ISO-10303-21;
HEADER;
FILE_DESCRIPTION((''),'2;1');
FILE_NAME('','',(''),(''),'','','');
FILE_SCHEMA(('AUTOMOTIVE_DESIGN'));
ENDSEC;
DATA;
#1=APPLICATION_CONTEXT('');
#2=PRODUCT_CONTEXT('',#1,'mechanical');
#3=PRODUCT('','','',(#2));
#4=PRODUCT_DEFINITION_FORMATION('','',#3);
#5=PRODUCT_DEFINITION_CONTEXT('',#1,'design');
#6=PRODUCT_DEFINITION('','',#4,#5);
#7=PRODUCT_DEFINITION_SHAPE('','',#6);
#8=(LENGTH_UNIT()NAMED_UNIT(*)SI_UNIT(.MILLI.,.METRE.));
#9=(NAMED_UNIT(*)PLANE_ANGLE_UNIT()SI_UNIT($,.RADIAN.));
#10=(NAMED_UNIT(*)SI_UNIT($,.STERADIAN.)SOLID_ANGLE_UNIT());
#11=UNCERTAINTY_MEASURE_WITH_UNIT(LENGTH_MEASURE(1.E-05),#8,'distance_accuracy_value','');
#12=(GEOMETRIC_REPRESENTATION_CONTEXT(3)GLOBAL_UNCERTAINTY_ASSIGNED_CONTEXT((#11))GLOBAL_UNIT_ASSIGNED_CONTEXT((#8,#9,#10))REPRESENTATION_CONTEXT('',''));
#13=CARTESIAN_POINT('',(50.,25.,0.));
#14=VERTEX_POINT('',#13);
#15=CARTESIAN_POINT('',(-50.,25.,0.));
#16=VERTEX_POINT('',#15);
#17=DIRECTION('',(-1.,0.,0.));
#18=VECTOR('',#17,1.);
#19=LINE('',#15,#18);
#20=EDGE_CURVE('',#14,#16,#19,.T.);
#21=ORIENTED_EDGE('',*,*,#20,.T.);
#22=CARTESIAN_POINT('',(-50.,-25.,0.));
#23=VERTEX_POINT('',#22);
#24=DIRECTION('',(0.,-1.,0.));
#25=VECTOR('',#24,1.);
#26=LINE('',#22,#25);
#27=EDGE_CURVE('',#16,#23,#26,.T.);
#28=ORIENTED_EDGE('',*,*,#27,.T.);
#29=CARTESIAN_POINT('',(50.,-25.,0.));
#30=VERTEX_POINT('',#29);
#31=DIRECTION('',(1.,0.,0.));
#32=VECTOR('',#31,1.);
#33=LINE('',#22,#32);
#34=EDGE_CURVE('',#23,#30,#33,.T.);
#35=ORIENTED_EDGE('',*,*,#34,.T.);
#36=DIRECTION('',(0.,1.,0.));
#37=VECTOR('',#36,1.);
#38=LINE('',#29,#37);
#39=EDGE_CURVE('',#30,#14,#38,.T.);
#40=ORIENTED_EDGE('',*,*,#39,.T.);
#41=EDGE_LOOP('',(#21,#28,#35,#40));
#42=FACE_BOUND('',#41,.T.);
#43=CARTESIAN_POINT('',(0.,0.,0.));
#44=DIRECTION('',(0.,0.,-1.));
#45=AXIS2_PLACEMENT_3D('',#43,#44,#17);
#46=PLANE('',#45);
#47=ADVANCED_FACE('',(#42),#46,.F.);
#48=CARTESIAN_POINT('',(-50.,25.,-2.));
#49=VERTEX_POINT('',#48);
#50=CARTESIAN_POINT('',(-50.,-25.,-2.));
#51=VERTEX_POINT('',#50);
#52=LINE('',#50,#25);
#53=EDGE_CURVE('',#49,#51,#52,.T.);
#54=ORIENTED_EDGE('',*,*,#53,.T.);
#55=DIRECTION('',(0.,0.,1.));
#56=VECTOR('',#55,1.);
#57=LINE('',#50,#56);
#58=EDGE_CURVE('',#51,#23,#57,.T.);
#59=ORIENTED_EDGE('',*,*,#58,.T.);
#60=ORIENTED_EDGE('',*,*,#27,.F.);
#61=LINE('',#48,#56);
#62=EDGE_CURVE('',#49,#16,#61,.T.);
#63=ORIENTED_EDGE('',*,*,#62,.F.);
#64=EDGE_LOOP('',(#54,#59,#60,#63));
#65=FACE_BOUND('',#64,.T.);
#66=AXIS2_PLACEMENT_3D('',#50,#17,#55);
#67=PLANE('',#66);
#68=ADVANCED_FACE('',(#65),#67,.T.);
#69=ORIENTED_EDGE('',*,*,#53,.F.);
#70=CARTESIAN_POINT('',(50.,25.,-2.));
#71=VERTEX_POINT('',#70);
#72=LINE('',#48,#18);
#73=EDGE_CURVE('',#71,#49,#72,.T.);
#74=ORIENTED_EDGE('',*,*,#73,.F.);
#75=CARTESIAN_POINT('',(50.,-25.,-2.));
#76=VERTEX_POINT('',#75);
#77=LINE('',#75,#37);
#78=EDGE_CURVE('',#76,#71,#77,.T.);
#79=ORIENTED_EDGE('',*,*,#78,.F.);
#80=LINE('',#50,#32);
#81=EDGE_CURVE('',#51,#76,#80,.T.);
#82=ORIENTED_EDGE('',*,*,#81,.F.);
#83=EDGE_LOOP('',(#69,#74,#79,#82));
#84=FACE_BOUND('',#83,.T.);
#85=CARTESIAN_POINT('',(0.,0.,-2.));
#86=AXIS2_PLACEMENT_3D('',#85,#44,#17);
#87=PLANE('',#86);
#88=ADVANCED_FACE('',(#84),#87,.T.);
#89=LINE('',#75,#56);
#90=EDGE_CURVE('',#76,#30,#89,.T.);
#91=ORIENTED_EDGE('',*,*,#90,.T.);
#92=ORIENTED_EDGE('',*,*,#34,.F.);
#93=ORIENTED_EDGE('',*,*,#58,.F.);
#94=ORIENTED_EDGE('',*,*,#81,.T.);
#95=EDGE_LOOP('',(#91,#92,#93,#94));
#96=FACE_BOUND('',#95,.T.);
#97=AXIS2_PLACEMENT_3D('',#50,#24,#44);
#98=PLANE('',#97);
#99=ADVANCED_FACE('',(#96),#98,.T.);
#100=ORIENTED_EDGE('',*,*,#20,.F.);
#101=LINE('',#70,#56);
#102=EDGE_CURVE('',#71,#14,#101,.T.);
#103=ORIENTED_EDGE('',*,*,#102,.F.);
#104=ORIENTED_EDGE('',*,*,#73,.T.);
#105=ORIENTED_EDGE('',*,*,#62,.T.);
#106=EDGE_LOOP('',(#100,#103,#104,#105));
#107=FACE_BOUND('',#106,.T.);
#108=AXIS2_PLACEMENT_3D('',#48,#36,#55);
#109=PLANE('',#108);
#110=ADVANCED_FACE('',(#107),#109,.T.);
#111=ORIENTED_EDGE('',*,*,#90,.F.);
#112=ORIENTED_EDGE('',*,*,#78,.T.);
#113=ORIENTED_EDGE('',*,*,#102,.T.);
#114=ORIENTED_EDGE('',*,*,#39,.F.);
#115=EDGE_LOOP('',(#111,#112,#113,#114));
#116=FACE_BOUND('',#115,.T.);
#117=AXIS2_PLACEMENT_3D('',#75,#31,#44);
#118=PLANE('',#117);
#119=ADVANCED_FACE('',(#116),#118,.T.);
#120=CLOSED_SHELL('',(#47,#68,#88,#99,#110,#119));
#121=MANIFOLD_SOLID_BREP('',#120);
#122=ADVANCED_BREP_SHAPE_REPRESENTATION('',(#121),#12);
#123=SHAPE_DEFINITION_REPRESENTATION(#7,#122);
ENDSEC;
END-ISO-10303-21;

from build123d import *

# Parameters (mm, degrees)
SKETCH_1_W             = 100
SKETCH_1_H             = 50
SM_BASE_FLANGE_1_DEPTH = 2


# Sheet-metal steps are written as plain solids
with BuildPart() as part:
    # Sketch 1 → Базовая кромка1 (new body)
    with BuildSketch(Plane.XY):
        Rectangle(SKETCH_1_W, SKETCH_1_H)
    extrude(amount=-SM_BASE_FLANGE_1_DEPTH)


solid = part.part
